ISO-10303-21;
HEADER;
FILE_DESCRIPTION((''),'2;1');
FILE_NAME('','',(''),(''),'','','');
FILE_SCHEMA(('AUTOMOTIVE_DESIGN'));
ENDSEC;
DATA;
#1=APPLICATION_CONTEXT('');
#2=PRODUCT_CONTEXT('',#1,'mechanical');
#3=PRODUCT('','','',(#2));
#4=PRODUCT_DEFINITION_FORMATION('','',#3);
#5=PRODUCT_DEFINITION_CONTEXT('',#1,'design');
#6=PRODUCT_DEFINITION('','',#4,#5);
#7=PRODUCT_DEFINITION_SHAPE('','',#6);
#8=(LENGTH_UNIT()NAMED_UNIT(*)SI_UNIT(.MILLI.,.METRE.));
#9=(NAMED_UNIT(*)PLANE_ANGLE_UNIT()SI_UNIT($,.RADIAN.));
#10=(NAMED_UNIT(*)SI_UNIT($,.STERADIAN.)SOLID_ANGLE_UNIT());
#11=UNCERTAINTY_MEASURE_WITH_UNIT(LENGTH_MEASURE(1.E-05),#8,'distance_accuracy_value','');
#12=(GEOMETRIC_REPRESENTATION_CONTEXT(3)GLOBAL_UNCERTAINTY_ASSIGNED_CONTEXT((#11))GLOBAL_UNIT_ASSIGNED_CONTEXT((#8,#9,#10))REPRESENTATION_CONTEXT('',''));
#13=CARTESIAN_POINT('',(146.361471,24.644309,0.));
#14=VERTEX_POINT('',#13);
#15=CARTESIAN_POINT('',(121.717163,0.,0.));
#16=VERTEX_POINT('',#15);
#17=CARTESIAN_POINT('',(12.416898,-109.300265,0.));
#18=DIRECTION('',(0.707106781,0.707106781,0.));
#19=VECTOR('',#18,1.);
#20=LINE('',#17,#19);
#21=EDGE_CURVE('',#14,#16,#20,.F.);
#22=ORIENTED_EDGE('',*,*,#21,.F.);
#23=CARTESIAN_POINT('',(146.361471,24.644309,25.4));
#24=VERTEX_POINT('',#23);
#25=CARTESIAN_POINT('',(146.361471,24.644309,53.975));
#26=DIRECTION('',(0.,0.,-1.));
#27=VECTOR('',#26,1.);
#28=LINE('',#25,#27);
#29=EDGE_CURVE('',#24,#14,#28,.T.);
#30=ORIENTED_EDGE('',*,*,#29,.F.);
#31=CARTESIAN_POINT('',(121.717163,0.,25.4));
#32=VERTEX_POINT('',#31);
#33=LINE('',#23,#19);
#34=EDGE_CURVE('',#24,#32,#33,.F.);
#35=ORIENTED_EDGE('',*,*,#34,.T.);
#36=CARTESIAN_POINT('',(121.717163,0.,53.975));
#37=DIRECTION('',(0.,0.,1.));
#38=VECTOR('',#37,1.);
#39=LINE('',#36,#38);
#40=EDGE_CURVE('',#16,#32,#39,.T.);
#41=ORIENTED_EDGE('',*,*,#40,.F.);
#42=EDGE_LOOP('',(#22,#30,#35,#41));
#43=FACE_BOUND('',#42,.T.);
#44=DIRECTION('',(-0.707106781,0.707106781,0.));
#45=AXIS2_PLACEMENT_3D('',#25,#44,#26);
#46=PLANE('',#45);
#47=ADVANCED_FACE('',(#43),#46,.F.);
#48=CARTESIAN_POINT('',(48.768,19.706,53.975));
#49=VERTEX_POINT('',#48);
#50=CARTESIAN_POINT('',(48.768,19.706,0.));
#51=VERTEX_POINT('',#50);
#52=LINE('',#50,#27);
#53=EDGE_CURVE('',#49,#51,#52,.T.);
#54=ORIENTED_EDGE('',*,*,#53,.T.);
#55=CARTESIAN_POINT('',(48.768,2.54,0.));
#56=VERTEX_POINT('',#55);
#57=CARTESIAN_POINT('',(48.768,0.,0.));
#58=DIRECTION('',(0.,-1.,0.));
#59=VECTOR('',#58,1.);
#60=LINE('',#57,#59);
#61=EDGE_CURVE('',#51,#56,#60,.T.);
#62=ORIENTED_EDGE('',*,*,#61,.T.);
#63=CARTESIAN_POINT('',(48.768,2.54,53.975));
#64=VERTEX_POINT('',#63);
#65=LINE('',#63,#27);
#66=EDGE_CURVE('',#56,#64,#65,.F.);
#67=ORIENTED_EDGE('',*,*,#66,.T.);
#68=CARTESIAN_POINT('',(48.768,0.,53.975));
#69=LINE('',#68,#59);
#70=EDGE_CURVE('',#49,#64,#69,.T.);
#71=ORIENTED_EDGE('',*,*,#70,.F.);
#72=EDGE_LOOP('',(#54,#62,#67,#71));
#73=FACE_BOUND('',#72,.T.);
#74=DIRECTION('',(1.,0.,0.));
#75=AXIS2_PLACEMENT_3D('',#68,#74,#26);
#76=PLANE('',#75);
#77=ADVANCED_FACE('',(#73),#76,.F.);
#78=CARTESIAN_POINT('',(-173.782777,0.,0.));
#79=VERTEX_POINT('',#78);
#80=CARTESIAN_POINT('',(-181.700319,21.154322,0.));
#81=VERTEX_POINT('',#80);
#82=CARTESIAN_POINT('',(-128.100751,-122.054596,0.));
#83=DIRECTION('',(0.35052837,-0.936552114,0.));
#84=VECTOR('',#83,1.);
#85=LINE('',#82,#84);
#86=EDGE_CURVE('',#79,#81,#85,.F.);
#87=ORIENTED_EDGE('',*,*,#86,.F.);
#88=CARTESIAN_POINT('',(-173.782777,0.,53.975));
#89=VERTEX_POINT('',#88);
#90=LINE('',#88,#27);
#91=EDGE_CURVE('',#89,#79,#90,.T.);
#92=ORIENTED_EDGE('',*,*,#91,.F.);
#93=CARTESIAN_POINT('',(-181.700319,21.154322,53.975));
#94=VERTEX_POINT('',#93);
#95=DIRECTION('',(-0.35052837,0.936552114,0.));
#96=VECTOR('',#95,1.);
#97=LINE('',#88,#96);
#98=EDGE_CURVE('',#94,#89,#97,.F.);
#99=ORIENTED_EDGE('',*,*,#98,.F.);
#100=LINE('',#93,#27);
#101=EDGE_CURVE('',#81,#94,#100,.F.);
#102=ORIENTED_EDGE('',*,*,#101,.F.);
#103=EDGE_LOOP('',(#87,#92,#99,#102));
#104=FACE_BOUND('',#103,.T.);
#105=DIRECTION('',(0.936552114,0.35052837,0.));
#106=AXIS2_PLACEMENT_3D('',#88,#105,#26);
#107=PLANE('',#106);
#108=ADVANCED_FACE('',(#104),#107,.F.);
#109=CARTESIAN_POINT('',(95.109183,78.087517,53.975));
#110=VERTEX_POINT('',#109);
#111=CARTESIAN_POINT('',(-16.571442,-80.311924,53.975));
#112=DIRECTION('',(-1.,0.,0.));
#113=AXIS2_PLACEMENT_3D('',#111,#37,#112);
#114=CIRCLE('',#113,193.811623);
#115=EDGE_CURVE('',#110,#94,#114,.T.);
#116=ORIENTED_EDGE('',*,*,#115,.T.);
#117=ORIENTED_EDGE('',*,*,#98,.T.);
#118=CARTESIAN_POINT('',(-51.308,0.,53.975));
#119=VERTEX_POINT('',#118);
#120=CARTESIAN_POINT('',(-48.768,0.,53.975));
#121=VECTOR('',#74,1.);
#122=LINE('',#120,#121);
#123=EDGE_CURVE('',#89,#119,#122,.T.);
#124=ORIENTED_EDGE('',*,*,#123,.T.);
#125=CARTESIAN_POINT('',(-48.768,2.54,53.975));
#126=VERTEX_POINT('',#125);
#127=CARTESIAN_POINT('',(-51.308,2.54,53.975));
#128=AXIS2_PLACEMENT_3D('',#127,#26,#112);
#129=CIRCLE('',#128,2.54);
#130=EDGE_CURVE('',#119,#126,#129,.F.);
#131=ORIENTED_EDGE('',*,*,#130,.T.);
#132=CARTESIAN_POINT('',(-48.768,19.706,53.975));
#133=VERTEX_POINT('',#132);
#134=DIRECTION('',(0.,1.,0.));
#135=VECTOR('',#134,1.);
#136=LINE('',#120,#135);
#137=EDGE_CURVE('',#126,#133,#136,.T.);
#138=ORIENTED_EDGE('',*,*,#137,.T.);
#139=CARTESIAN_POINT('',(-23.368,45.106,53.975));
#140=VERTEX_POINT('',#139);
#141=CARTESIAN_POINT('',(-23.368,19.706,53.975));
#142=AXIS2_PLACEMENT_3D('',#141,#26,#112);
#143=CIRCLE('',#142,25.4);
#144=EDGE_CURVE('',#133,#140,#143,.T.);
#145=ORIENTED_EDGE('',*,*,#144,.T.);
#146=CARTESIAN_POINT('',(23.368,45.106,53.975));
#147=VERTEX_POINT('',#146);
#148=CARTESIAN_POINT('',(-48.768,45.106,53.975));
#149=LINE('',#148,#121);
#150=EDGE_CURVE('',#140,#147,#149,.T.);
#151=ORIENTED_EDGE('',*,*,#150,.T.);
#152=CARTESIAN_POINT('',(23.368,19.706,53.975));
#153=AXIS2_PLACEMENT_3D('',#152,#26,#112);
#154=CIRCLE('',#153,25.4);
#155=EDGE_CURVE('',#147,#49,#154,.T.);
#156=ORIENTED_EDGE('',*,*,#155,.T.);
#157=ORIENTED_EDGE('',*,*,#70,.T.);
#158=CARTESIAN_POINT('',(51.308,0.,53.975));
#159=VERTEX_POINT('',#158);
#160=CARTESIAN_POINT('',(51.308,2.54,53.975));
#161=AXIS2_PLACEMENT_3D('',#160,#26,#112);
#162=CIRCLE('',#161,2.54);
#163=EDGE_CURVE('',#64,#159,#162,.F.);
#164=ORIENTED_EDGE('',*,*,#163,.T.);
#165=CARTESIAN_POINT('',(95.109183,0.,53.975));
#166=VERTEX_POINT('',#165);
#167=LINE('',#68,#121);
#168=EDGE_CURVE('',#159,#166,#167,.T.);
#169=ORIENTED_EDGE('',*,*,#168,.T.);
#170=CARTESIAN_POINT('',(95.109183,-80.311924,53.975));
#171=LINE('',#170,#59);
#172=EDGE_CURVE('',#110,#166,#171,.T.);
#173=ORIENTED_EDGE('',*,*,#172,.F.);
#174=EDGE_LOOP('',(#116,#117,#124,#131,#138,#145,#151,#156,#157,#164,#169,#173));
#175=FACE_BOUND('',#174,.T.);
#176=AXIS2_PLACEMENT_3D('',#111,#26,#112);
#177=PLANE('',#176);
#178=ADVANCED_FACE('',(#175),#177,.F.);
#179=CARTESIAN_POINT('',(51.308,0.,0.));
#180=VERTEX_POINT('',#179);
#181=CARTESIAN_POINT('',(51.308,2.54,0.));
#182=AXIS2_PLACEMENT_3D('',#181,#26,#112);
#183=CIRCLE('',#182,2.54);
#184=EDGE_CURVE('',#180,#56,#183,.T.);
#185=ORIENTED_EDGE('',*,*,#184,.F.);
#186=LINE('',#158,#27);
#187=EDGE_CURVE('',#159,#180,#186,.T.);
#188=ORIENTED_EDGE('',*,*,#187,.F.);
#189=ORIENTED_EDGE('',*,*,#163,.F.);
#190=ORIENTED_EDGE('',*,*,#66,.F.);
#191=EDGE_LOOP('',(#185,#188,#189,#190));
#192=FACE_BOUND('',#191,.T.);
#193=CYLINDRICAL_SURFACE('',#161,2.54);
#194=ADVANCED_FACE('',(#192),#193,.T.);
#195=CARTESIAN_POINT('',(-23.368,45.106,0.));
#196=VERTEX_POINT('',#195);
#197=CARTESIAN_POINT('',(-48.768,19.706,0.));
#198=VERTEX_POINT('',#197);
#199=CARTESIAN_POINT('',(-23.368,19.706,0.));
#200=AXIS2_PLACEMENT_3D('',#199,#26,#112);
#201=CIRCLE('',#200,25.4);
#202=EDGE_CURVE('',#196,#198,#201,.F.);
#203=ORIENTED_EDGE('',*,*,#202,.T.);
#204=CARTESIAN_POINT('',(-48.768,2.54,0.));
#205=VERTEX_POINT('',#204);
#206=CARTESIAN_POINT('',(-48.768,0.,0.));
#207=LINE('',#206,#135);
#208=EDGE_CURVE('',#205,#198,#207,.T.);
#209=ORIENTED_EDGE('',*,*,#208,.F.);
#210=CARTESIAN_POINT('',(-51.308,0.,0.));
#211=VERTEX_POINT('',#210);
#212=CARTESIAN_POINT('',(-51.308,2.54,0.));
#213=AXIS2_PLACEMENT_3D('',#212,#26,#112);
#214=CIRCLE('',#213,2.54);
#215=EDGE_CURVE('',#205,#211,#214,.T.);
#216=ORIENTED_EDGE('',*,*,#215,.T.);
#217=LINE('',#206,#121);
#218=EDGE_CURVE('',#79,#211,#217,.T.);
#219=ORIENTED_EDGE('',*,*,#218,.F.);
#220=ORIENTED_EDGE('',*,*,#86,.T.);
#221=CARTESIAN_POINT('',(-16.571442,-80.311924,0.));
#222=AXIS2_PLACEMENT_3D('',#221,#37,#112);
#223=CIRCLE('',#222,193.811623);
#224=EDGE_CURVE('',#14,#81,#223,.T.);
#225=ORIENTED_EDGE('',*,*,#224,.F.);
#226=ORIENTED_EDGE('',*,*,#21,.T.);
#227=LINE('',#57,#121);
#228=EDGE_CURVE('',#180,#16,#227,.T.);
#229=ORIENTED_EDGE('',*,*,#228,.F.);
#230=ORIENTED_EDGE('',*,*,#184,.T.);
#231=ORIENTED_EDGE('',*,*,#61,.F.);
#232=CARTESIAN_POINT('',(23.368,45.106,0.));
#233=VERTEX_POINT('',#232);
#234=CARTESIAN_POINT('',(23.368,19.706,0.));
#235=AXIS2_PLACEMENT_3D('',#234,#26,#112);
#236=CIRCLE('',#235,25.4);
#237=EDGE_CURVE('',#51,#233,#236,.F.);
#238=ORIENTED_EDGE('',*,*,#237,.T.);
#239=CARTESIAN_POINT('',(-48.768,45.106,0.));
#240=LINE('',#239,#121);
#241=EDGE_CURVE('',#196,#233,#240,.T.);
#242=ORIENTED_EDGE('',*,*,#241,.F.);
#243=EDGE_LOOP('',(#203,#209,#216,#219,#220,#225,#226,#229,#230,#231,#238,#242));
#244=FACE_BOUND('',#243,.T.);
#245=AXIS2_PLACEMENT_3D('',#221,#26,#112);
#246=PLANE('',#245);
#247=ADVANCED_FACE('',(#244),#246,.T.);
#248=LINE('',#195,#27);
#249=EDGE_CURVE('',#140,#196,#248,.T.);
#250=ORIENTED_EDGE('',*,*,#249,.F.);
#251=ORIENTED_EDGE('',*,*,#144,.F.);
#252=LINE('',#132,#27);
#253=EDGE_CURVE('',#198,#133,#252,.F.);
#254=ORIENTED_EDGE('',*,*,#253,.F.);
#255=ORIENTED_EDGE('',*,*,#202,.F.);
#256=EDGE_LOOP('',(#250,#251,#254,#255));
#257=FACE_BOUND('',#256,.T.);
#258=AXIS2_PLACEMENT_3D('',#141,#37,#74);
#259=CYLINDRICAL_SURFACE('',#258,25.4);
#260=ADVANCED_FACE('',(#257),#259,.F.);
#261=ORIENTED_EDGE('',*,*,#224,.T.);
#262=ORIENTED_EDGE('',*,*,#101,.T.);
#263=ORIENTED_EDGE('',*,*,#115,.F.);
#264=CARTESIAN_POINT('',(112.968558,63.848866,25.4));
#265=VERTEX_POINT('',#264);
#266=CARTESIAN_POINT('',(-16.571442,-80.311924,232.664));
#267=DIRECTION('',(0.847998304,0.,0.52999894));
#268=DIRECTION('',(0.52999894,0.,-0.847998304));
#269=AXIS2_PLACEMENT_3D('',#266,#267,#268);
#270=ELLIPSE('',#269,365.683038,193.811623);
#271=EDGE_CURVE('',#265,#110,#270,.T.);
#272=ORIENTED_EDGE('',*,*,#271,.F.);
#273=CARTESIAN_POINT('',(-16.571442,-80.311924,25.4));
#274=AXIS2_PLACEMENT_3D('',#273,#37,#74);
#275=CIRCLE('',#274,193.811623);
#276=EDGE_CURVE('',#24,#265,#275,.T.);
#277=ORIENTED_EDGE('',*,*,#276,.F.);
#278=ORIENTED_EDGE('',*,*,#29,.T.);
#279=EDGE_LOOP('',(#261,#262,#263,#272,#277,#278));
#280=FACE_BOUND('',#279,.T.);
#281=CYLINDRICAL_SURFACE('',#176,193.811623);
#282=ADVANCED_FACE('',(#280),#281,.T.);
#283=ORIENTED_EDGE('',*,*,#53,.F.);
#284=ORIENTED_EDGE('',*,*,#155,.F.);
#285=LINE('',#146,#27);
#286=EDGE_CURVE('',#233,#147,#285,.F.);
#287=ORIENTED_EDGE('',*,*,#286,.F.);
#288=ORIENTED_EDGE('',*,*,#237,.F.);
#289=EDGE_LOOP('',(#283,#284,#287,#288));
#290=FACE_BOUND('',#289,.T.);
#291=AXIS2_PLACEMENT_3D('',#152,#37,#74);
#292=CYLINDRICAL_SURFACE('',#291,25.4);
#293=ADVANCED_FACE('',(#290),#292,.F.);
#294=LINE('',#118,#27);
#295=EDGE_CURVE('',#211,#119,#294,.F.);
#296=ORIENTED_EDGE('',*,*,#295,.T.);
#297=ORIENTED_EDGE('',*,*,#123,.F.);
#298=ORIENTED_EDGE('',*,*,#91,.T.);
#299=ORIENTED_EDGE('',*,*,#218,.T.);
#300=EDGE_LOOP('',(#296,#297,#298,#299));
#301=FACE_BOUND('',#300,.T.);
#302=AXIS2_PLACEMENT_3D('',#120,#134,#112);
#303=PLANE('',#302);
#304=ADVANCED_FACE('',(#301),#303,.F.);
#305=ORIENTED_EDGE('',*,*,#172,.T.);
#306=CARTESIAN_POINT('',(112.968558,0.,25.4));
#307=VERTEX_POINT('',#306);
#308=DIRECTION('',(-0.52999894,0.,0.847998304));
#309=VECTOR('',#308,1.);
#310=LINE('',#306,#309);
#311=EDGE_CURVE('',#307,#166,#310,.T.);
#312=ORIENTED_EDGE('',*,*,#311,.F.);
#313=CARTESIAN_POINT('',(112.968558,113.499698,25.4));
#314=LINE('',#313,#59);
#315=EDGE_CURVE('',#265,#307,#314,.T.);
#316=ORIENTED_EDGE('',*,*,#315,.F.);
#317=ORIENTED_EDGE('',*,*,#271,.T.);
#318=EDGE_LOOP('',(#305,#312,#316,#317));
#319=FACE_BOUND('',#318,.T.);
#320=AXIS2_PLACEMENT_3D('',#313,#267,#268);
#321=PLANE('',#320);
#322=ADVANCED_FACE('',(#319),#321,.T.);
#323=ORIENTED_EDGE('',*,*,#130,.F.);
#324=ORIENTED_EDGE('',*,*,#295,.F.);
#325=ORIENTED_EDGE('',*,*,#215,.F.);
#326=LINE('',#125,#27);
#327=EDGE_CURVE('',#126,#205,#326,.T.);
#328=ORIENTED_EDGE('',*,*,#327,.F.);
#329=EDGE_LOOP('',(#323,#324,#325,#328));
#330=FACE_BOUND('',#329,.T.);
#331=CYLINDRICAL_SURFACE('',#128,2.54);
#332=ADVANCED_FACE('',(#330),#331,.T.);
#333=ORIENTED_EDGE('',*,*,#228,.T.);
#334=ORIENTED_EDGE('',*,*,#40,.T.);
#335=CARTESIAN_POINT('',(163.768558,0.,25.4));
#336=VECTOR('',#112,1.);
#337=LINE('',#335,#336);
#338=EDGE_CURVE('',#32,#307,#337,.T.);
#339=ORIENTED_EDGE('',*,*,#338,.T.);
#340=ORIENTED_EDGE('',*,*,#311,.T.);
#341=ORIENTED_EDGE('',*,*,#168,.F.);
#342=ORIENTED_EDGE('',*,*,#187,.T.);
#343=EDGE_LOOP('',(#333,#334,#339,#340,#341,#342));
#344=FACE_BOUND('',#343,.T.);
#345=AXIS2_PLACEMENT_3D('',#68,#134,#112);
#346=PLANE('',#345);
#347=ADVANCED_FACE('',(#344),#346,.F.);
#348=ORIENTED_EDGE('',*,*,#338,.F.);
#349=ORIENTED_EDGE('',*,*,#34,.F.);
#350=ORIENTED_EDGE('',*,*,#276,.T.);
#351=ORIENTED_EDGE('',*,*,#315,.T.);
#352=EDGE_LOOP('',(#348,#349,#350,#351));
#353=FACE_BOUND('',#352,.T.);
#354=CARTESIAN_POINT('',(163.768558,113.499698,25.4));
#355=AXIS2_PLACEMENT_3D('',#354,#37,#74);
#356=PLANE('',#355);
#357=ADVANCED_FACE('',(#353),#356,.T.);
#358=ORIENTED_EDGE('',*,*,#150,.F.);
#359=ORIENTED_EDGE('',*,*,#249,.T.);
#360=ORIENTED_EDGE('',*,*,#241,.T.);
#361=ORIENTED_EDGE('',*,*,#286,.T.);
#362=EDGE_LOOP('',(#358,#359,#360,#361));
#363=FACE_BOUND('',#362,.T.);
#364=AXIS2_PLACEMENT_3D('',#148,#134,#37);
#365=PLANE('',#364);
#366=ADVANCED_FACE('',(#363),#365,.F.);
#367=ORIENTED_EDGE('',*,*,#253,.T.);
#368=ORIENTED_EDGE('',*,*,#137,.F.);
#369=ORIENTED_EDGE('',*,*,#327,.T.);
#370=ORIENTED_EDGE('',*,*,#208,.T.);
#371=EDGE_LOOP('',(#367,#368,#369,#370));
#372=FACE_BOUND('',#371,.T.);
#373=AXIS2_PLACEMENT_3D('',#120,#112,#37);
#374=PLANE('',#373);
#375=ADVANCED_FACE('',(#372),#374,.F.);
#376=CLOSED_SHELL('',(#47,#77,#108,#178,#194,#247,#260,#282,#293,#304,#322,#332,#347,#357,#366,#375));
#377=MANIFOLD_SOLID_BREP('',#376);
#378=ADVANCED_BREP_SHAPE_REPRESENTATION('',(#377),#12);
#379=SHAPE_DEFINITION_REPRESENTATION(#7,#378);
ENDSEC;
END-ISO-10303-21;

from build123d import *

# Parameters (mm, degrees)
BOSS_EXTRUDE1_DEPTH = 53.975
FILLET1_R           = 25.4
FILLET2_R           = 2.54
CHAMFER1_SIZE       = 38.1
CHAMFER2_SIZE       = 19.17726945
CUT_EXTRUDE2_DEPTH  = 221.930957303


with BuildPart() as part:
    # Sketch1 → Boss-Extrude1 (new body)
    with BuildSketch(Plane.XY):
        with BuildLine():
            Line((-48.768, 0), (-48.768, 45.106))
            Line((-48.768, 45.106), (48.768, 45.106))
            Line((48.768, 45.106), (48.768, 0))
            Line((48.768, 0), (159.817162922, 0))
            ThreePointArc((159.817162922, 0), (-16.571441881, 113.499698272), (-192.960046685, 0))
            Line((-192.960046685, 0), (-48.768, 0))
        make_face()
    extrude(amount=BOSS_EXTRUDE1_DEPTH)

    # Fillet1
    fillet1_edges = [part.edges().sort_by_distance(p)[0] for p in [
        (48.768, 45.106, 26.9875),
        (-48.768, 45.106, 26.9875),
    ]]
    fillet(fillet1_edges, radius=FILLET1_R)

    # Fillet2
    fillet2_edges = [part.edges().sort_by_distance(p)[0] for p in [
        (48.768, 0, 26.9875),
        (-48.768, 0, 26.9875),
    ]]
    fillet(fillet2_edges, radius=FILLET2_R)

    # Chamfer1
    # the kernel refuses this chamfer: 38.1, 28.765904175 mm, written as the material it takes off along each edge
    with BuildSketch(Plane(origin=(159.817162922, 0, -97.981121842), x_dir=(-0.47921828298651964, 0.8776957543770233, 0), z_dir=(0, 0, 1))) as chamfer1_piece_1:
        with BuildLine():
            Line((28.078418346, 0), (CHAMFER1_SIZE * 0.479218282987, CHAMFER1_SIZE * 0.877695754377))
            Line((CHAMFER1_SIZE * 0.479218282987, CHAMFER1_SIZE * 0.877695754377), (0, 0))
            ThreePointArc((0, 0), (14.253669202, -0.509031999), (28.078418346, 0))
        make_face()
    extrude(amount=249.937243683, mode=Mode.SUBTRACT)

    # Chamfer2
    # the kernel refuses this chamfer: 25.4, 19.17726945 mm, written as the material it takes off along each edge
    with BuildSketch(Plane(origin=(-192.960046685, 0, -61.621694141), x_dir=(1, 0, 0), z_dir=(0, 0, 1))) as chamfer2_piece_1:
        with BuildLine():
            Line((CHAMFER2_SIZE, 0), (11.259728132, 21.154322158))
            ThreePointArc((11.259728132, 21.154322158), (5.460860237, 11.048084579), (0, 0))
            Line((0, 0), (CHAMFER2_SIZE, 0))
        make_face()
    extrude(amount=177.218388283, mode=Mode.SUBTRACT)

    # Sketch2 → Cut-Extrude2 (cut, through all)
    with BuildSketch(Plane(origin=(0, 0, 0), x_dir=(1, 0, 0), z_dir=(0, 1, 0))):
        Polygon((112.968558119, -25.4), (49.468558119, -127), (163.768558119, -127), (163.768558119, -25.4), align=None)
    extrude(amount=CUT_EXTRUDE2_DEPTH, mode=Mode.SUBTRACT)


solid = part.part
